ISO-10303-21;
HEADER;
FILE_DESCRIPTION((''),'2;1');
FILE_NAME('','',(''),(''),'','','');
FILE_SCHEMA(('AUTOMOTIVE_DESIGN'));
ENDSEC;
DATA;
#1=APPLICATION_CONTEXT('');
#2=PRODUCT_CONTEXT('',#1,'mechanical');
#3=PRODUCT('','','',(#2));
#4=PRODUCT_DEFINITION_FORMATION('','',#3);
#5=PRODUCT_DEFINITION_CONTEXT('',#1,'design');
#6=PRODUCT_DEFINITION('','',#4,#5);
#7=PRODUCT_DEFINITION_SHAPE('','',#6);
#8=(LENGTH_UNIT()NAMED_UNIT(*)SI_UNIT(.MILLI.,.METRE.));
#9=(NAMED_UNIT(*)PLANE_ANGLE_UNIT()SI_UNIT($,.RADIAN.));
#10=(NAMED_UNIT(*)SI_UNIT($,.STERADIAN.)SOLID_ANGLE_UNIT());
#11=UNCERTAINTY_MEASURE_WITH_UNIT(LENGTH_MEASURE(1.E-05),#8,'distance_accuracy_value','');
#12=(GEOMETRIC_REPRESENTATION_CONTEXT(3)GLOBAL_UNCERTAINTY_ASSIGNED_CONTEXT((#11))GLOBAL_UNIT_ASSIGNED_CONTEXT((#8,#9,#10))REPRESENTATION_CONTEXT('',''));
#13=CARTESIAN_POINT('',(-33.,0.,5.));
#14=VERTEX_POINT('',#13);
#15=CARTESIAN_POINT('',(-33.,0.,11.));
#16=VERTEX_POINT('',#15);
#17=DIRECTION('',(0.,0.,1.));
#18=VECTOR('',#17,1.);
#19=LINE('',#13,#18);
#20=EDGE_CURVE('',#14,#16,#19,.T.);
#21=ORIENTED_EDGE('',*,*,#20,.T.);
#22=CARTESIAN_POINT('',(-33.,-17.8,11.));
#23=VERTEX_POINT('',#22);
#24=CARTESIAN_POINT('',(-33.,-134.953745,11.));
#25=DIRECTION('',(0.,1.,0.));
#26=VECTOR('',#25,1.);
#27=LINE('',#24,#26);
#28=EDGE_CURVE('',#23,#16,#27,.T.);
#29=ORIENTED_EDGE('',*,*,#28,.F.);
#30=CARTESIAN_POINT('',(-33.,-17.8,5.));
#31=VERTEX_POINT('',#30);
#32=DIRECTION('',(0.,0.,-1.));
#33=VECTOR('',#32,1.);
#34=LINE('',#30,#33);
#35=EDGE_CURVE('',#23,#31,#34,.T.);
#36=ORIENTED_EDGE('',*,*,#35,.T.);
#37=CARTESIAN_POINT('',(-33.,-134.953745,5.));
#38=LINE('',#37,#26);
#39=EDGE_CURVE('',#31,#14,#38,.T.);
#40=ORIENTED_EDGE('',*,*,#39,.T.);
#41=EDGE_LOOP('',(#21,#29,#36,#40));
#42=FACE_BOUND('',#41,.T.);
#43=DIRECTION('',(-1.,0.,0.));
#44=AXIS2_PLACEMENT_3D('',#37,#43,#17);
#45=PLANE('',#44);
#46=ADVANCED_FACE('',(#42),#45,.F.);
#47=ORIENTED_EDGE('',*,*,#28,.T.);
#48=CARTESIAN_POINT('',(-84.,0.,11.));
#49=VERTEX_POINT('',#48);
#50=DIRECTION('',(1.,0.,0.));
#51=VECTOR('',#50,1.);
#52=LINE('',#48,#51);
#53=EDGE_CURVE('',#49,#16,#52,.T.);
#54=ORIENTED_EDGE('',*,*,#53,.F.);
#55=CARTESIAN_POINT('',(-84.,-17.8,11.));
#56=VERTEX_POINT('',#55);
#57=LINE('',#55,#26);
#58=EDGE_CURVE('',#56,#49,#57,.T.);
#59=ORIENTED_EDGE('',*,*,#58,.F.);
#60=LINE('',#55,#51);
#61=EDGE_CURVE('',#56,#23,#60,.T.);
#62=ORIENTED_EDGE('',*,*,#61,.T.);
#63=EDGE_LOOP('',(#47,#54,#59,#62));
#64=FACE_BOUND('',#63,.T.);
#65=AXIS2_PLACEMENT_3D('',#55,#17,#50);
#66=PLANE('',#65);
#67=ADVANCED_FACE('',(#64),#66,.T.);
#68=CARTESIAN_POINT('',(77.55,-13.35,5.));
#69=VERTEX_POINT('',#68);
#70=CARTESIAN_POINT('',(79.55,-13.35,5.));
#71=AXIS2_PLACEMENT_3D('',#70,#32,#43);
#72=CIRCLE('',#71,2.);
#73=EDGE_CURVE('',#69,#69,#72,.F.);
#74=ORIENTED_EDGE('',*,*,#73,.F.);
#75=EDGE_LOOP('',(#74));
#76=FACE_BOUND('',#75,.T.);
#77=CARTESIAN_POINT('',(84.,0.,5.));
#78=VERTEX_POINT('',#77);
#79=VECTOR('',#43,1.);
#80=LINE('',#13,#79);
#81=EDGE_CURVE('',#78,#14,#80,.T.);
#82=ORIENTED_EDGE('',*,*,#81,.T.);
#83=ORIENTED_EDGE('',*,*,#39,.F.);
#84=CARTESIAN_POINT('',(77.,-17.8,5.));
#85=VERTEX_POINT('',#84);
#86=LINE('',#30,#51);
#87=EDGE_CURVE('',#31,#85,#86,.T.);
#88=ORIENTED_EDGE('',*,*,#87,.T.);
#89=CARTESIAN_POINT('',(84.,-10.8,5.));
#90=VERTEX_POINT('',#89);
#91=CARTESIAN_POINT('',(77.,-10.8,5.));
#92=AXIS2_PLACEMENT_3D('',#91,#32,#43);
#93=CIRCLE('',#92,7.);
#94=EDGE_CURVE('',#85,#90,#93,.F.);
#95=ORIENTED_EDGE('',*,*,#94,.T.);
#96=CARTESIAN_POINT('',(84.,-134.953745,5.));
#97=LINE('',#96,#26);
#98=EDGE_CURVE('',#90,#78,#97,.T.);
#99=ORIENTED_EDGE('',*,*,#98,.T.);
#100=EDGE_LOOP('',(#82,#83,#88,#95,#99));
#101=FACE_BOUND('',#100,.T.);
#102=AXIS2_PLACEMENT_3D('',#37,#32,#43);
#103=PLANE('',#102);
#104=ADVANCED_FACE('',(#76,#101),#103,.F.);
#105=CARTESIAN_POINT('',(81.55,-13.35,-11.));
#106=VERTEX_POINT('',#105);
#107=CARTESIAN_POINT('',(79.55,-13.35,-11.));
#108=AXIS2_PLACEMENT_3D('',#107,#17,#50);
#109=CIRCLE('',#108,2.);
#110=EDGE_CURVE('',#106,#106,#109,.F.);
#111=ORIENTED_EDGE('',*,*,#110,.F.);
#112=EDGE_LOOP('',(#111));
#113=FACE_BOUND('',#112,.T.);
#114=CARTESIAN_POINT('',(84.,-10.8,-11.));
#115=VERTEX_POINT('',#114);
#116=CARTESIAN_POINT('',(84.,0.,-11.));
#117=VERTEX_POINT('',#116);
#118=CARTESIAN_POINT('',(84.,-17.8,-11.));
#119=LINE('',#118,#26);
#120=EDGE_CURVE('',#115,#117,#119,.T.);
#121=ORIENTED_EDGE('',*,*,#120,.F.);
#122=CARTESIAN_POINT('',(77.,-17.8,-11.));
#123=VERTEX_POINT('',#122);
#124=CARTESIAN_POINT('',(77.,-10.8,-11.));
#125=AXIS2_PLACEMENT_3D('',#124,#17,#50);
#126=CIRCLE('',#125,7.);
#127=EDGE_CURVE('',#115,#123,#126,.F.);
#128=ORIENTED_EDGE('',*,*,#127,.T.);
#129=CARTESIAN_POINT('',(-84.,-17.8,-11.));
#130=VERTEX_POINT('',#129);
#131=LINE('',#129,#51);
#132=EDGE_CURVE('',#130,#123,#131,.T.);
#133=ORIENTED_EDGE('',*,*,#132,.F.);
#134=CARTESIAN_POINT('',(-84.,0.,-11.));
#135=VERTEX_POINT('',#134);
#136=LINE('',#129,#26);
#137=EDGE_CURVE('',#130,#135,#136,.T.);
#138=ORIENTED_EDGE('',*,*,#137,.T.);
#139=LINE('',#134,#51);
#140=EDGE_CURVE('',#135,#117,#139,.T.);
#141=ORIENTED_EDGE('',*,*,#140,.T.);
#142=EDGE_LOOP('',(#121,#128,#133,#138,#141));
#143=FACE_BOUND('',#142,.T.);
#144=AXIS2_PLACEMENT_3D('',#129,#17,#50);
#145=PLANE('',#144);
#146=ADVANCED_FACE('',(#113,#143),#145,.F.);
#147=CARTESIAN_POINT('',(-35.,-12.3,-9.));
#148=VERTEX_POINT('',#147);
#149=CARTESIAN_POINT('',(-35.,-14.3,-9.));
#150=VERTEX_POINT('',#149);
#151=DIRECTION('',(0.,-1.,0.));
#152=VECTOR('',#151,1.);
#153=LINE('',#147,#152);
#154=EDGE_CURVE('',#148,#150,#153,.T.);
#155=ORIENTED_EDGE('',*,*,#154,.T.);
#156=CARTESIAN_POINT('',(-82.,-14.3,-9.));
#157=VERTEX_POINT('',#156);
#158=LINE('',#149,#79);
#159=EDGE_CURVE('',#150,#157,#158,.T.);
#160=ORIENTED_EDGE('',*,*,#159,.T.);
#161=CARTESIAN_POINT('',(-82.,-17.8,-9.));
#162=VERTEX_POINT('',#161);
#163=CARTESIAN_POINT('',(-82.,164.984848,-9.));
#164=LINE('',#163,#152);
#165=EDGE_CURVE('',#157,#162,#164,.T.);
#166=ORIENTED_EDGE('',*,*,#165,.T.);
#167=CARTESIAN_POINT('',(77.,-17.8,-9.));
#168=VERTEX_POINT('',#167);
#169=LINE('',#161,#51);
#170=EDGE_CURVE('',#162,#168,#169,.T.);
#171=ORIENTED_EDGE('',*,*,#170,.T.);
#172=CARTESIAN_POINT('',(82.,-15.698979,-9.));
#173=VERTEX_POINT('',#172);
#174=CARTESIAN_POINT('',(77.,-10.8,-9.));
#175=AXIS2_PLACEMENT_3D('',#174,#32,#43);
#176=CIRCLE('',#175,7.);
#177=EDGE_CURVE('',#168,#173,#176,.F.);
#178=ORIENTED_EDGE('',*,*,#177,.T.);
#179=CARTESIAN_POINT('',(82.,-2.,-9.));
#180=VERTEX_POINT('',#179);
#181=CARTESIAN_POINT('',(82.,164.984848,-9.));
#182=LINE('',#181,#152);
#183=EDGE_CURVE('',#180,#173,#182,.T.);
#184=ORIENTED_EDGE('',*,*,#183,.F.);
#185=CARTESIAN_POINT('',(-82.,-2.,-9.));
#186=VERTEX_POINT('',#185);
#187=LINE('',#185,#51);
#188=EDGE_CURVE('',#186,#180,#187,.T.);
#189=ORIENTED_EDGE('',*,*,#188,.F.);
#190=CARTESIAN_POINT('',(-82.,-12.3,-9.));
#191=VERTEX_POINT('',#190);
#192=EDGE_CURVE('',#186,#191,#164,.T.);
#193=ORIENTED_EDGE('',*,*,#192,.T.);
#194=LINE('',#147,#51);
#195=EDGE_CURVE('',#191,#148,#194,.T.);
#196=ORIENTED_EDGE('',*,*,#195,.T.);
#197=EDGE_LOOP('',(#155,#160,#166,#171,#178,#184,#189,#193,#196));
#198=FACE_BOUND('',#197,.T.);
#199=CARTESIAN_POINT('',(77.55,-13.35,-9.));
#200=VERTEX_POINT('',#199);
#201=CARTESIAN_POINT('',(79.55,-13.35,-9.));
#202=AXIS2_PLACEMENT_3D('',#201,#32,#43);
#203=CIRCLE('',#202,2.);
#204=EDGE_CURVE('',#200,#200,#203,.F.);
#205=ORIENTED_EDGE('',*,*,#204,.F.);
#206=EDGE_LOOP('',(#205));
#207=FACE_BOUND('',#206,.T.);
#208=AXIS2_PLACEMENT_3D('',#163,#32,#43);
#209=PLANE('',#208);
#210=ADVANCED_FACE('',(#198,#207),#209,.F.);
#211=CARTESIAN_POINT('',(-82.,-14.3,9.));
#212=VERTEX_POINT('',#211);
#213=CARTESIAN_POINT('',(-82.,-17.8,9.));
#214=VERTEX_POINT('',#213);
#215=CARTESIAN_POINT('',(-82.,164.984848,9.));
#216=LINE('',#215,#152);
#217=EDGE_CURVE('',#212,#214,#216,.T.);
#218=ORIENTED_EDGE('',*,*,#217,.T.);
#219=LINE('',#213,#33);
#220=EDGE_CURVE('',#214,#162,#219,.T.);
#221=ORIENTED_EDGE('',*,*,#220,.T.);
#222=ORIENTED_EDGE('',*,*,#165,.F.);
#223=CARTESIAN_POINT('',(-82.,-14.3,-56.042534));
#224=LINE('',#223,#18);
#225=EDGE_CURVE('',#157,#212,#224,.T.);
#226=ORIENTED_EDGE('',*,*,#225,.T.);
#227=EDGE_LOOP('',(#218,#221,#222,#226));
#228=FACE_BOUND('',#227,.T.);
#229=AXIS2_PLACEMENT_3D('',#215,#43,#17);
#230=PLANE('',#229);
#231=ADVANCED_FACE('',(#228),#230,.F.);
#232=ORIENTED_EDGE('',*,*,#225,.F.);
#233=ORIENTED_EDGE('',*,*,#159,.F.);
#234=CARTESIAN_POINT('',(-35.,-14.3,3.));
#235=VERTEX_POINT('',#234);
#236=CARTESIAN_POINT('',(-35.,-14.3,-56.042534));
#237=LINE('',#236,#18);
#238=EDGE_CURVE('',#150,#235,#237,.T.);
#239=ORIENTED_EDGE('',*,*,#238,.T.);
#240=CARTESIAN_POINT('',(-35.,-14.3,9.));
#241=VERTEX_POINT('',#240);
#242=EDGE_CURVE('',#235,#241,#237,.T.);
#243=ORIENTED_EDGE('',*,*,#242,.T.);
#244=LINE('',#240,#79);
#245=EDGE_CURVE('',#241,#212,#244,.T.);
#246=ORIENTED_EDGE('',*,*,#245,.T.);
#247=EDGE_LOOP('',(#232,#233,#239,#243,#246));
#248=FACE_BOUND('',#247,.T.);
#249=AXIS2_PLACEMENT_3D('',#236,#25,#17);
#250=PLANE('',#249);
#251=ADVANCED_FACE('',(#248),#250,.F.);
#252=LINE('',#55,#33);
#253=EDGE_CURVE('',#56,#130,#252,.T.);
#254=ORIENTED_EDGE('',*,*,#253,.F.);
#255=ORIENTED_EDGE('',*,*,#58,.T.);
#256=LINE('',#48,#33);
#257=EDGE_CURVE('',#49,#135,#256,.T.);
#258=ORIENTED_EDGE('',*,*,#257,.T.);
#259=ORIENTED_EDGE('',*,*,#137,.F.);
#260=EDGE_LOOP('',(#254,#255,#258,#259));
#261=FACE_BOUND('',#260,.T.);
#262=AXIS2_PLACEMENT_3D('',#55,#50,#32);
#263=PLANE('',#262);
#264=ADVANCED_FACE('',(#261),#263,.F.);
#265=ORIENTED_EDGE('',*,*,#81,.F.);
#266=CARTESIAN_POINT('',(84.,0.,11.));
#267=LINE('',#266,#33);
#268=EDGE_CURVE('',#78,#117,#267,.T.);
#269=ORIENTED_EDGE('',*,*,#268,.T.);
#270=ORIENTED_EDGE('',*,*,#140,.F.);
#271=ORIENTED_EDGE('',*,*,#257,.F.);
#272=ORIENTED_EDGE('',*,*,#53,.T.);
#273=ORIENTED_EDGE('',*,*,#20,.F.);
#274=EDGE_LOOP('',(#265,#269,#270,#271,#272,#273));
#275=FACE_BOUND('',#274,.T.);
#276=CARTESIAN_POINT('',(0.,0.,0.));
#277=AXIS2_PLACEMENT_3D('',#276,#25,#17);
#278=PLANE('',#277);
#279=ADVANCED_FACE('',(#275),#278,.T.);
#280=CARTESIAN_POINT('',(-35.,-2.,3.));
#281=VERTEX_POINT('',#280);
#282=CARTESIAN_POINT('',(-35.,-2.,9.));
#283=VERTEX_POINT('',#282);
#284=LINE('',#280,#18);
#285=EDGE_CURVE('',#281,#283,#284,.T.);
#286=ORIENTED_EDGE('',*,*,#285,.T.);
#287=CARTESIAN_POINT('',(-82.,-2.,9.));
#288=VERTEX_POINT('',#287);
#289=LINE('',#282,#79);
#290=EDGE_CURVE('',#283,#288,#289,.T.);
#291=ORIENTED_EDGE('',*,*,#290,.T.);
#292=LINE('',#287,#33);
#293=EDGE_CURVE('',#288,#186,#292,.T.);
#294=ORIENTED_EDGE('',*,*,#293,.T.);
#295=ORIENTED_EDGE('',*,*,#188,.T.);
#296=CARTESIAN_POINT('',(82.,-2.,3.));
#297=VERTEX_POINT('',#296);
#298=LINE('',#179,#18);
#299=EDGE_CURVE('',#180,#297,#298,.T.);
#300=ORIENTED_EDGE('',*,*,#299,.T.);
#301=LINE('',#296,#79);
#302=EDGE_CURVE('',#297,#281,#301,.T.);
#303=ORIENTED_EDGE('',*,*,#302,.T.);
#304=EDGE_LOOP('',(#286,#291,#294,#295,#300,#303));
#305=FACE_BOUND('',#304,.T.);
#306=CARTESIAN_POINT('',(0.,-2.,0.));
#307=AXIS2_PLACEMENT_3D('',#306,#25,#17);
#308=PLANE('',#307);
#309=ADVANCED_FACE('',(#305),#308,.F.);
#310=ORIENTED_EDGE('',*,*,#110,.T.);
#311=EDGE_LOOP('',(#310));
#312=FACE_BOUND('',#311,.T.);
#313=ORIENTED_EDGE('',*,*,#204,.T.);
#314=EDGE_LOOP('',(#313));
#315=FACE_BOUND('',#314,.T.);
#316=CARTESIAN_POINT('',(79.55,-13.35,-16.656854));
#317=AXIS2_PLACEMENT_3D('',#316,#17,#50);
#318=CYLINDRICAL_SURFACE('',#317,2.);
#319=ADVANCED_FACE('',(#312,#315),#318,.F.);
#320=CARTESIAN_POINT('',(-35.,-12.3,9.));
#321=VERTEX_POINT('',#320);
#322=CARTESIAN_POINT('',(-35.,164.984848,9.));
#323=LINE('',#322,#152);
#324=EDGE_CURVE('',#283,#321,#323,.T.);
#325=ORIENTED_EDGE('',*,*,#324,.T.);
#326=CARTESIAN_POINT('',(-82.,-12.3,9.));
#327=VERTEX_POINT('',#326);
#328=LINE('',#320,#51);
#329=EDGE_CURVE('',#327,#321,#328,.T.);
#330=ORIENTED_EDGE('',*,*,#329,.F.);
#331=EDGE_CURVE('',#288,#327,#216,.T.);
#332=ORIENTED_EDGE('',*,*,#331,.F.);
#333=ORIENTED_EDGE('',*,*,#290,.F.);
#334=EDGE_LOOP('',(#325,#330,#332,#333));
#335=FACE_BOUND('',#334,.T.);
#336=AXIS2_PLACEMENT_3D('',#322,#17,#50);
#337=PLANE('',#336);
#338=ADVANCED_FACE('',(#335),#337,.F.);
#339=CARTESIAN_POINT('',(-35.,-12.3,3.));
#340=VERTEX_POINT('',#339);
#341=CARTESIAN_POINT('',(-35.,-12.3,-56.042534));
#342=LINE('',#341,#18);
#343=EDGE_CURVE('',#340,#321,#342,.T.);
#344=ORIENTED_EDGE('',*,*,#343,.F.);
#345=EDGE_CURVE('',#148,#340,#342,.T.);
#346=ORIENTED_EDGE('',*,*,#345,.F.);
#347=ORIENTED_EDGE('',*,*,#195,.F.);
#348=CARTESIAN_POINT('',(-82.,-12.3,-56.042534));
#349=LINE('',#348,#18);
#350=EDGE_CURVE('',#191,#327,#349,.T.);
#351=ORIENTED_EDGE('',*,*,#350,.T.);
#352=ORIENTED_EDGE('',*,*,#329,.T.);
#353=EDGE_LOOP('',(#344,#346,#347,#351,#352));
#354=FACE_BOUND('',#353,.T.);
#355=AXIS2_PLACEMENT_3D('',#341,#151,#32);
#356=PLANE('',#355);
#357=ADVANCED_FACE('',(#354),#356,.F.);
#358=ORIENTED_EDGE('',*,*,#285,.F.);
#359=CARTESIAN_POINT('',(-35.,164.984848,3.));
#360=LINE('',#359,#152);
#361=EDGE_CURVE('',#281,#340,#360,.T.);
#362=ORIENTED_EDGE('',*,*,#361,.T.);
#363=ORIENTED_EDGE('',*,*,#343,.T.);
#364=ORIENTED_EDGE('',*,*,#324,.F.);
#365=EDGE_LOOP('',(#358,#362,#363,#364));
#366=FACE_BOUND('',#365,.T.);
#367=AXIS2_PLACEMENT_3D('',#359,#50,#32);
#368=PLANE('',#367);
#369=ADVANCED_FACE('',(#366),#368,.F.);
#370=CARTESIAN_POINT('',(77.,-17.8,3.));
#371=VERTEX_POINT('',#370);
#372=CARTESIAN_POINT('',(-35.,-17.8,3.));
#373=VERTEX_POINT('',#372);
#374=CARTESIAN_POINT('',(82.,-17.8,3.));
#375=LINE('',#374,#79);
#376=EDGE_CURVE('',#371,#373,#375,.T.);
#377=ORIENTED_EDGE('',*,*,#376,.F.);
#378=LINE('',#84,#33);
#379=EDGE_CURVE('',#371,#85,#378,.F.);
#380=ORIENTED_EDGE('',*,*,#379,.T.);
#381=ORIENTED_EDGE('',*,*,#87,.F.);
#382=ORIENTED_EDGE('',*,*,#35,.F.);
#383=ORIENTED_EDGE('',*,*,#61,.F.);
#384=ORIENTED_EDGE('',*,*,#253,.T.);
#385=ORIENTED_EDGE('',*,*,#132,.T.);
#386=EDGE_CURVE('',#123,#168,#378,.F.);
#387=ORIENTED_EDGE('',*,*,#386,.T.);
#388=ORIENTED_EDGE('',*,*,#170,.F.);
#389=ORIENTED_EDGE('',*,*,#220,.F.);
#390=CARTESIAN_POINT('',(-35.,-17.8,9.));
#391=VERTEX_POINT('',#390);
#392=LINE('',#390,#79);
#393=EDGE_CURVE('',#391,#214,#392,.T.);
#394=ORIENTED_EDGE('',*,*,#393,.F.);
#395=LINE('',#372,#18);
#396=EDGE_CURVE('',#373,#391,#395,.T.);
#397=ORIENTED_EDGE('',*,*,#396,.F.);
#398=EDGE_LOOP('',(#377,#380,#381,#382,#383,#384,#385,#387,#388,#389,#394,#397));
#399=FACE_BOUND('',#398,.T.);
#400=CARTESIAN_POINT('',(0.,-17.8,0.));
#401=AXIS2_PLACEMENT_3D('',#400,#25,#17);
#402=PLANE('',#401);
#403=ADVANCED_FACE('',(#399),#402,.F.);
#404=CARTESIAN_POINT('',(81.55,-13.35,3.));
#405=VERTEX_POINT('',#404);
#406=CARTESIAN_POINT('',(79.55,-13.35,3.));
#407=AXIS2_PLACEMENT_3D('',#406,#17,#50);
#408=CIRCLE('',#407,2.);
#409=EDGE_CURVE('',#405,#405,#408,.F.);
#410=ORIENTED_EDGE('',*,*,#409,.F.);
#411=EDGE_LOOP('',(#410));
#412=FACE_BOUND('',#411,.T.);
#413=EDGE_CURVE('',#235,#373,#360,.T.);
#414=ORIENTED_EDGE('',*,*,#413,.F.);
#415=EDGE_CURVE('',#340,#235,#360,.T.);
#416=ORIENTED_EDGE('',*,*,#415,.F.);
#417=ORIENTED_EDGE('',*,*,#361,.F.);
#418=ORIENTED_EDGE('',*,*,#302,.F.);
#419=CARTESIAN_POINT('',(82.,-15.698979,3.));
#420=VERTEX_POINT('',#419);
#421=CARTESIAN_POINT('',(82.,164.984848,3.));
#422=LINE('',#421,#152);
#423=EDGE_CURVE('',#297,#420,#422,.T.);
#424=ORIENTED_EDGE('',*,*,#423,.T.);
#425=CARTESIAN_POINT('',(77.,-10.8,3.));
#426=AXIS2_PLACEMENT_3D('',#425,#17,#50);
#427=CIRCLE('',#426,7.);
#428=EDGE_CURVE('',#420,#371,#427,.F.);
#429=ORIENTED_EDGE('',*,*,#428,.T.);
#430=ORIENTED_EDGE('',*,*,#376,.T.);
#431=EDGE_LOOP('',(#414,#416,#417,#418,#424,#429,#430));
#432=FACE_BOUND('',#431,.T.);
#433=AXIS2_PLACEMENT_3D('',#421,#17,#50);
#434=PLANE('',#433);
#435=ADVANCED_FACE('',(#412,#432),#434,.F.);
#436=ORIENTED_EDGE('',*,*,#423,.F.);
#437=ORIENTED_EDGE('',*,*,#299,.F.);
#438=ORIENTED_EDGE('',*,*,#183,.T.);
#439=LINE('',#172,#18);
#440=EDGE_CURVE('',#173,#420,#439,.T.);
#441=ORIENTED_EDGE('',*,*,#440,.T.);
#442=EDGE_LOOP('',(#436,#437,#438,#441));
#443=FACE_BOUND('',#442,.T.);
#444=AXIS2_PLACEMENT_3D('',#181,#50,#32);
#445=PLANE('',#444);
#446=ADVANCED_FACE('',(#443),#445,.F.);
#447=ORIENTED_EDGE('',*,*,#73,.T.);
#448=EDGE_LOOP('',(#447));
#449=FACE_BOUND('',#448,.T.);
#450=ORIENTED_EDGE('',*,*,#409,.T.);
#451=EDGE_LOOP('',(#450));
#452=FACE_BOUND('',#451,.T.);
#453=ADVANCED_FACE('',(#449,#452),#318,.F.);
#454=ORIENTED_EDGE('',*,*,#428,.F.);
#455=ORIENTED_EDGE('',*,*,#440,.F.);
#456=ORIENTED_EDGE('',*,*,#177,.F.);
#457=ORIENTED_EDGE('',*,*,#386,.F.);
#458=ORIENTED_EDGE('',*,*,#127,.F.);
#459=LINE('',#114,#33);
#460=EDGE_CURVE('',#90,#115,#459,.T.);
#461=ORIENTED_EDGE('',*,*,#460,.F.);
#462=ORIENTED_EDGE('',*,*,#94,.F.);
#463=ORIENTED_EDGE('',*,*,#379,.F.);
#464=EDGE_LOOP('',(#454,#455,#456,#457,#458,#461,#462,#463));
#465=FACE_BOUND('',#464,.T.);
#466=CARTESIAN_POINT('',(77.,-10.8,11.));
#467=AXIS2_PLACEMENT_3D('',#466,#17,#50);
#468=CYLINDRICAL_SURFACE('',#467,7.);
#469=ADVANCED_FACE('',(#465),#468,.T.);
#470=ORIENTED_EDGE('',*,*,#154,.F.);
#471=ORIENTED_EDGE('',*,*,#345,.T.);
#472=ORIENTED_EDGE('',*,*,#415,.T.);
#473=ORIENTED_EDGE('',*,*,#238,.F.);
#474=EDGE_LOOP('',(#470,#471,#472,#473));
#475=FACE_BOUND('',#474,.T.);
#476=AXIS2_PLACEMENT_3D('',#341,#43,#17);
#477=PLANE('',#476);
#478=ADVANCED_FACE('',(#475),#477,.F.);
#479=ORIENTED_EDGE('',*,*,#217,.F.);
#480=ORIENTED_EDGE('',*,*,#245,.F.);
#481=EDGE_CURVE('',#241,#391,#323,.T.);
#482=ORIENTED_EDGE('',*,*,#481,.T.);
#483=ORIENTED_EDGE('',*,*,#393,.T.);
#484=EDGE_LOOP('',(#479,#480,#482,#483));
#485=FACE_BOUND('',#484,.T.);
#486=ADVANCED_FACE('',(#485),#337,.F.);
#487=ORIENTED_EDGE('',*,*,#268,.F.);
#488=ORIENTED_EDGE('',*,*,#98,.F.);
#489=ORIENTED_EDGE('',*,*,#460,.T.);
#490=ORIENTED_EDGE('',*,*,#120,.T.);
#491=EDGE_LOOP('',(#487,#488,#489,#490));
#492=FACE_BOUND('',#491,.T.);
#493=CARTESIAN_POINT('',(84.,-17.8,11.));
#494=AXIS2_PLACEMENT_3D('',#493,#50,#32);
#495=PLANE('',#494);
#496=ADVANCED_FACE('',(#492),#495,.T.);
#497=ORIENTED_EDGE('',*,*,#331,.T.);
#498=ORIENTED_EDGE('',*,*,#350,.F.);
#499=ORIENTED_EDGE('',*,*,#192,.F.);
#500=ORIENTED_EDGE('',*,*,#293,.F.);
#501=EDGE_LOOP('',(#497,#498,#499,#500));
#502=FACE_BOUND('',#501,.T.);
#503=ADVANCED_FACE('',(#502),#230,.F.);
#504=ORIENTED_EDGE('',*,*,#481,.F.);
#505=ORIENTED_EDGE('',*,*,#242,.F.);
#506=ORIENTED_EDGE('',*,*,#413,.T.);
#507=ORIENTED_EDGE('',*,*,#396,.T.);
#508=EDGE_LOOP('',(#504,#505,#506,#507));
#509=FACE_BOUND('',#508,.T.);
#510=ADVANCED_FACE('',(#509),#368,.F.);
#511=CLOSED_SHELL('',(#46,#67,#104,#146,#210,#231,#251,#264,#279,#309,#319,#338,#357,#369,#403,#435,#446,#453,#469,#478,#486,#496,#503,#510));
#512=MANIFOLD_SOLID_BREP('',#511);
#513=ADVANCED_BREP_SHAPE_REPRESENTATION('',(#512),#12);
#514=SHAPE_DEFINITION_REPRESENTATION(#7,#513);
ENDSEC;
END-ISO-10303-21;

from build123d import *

# Parameters (mm, degrees)
SKETCH1_W           = 168
SKETCH1_H           = 22
BOSS_EXTRUDE1_DEPTH = 17.8
SKETCH8_R           = 2
CUT_EXTRUDE4_DEPTH  = 22
CUT_EXTRUDE2_REACH  = 88.567
SKETCH5_W           = 117
SKETCH5_H           = 6
CUT_EXTRUDE3_DEPTH  = 15.8
BOSS_EXTRUDE2_REACH = 90.164
SKETCH9_W           = 47
SKETCH9_H           = 2
FILLET1_R           = 7


with BuildPart() as part:
    # Sketch1 → Boss-Extrude1 (new body)
    with BuildSketch(Plane(origin=(0, 0, 0), x_dir=(1, 0, 0), z_dir=(0, 1, 0))):
        Rectangle(SKETCH1_W, SKETCH1_H)
    extrude(amount=-BOSS_EXTRUDE1_DEPTH)

    # Sketch8 → Cut-Extrude4 (cut)
    with BuildSketch(Plane.XY.offset(11)):
        with Locations((79.55, -13.35)):
            Circle(SKETCH8_R)
    extrude(amount=-CUT_EXTRUDE4_DEPTH, mode=Mode.SUBTRACT)

    # Cut-Extrude2: up to this face of the body (flat: up to its plane)
    cut_extrude2_end = Plane(part.part.faces().sort_by_distance((0, -17.8, 0))[0])
    # Sketch5 → Cut-Extrude2 (cut, up to the picked face)
    with BuildSketch(Plane(origin=(0, 0, 0), x_dir=(1, 0, 0), z_dir=(0, 1, 0)), mode=Mode.PRIVATE) as cut_extrude2_sk1:
        with Locations((25.5, -8)):
            Rectangle(SKETCH5_W, SKETCH5_H)
    cut_extrude2_tool1 = split(extrude(cut_extrude2_sk1.sketch, amount=-CUT_EXTRUDE2_REACH, mode=Mode.PRIVATE), bisect_by=cut_extrude2_end, keep=Keep.BOTH, mode=Mode.PRIVATE)
    add(cut_extrude2_tool1.solids().sort_by(Axis((25.5, 0, 8), (0, -1, 0)))[0], mode=Mode.SUBTRACT)

    # Sketch6 → Cut-Extrude3 (cut)
    with BuildSketch(Plane.XZ.offset(17.8)):
        Polygon((-82, 9), (-82, -9), (82, -9), (82, 3), (-35, 3), (-35, 9), align=None)
    extrude(amount=-CUT_EXTRUDE3_DEPTH, mode=Mode.SUBTRACT)

    # Boss-Extrude2: up to this face of the body (flat: up to its plane)
    boss_extrude2_end = Plane(part.part.faces().sort_by_distance((-0.387668404, -9.883187228, -9))[0])
    # Sketch9 → Boss-Extrude2 (add, up to the picked face)
    with BuildSketch(Plane(origin=(0, 0, 9), x_dir=(-1, 0, 0), z_dir=(0, 0, -1)), mode=Mode.PRIVATE) as boss_extrude2_sk1:
        with Locations((58.5, -13.3)):
            Rectangle(SKETCH9_W, SKETCH9_H)
    boss_extrude2_tool1 = split(extrude(boss_extrude2_sk1.sketch, amount=BOSS_EXTRUDE2_REACH, mode=Mode.PRIVATE), bisect_by=boss_extrude2_end, keep=Keep.BOTH, mode=Mode.PRIVATE)
    add(boss_extrude2_tool1.solids().sort_by(Axis((-58.5, -13.3, 9), (0, 0, -1)))[0])

    # Fillet1
    # the kernel refuses this fillet: 7 mm, written as the material it takes off along each edge
    with BuildSketch(Plane(origin=(84, -17.8, 22.5), x_dir=(-1, 0, 0), z_dir=(0, 0, -1))) as fillet1_piece_1:
        with BuildLine():
            CenterArc((FILLET1_R, FILLET1_R), FILLET1_R, 180, 90)
            Line((0, FILLET1_R), (0, 0))
            Line((0, 0), (FILLET1_R, 0))
        make_face()
    extrude(amount=51, mode=Mode.SUBTRACT)


solid = part.part
